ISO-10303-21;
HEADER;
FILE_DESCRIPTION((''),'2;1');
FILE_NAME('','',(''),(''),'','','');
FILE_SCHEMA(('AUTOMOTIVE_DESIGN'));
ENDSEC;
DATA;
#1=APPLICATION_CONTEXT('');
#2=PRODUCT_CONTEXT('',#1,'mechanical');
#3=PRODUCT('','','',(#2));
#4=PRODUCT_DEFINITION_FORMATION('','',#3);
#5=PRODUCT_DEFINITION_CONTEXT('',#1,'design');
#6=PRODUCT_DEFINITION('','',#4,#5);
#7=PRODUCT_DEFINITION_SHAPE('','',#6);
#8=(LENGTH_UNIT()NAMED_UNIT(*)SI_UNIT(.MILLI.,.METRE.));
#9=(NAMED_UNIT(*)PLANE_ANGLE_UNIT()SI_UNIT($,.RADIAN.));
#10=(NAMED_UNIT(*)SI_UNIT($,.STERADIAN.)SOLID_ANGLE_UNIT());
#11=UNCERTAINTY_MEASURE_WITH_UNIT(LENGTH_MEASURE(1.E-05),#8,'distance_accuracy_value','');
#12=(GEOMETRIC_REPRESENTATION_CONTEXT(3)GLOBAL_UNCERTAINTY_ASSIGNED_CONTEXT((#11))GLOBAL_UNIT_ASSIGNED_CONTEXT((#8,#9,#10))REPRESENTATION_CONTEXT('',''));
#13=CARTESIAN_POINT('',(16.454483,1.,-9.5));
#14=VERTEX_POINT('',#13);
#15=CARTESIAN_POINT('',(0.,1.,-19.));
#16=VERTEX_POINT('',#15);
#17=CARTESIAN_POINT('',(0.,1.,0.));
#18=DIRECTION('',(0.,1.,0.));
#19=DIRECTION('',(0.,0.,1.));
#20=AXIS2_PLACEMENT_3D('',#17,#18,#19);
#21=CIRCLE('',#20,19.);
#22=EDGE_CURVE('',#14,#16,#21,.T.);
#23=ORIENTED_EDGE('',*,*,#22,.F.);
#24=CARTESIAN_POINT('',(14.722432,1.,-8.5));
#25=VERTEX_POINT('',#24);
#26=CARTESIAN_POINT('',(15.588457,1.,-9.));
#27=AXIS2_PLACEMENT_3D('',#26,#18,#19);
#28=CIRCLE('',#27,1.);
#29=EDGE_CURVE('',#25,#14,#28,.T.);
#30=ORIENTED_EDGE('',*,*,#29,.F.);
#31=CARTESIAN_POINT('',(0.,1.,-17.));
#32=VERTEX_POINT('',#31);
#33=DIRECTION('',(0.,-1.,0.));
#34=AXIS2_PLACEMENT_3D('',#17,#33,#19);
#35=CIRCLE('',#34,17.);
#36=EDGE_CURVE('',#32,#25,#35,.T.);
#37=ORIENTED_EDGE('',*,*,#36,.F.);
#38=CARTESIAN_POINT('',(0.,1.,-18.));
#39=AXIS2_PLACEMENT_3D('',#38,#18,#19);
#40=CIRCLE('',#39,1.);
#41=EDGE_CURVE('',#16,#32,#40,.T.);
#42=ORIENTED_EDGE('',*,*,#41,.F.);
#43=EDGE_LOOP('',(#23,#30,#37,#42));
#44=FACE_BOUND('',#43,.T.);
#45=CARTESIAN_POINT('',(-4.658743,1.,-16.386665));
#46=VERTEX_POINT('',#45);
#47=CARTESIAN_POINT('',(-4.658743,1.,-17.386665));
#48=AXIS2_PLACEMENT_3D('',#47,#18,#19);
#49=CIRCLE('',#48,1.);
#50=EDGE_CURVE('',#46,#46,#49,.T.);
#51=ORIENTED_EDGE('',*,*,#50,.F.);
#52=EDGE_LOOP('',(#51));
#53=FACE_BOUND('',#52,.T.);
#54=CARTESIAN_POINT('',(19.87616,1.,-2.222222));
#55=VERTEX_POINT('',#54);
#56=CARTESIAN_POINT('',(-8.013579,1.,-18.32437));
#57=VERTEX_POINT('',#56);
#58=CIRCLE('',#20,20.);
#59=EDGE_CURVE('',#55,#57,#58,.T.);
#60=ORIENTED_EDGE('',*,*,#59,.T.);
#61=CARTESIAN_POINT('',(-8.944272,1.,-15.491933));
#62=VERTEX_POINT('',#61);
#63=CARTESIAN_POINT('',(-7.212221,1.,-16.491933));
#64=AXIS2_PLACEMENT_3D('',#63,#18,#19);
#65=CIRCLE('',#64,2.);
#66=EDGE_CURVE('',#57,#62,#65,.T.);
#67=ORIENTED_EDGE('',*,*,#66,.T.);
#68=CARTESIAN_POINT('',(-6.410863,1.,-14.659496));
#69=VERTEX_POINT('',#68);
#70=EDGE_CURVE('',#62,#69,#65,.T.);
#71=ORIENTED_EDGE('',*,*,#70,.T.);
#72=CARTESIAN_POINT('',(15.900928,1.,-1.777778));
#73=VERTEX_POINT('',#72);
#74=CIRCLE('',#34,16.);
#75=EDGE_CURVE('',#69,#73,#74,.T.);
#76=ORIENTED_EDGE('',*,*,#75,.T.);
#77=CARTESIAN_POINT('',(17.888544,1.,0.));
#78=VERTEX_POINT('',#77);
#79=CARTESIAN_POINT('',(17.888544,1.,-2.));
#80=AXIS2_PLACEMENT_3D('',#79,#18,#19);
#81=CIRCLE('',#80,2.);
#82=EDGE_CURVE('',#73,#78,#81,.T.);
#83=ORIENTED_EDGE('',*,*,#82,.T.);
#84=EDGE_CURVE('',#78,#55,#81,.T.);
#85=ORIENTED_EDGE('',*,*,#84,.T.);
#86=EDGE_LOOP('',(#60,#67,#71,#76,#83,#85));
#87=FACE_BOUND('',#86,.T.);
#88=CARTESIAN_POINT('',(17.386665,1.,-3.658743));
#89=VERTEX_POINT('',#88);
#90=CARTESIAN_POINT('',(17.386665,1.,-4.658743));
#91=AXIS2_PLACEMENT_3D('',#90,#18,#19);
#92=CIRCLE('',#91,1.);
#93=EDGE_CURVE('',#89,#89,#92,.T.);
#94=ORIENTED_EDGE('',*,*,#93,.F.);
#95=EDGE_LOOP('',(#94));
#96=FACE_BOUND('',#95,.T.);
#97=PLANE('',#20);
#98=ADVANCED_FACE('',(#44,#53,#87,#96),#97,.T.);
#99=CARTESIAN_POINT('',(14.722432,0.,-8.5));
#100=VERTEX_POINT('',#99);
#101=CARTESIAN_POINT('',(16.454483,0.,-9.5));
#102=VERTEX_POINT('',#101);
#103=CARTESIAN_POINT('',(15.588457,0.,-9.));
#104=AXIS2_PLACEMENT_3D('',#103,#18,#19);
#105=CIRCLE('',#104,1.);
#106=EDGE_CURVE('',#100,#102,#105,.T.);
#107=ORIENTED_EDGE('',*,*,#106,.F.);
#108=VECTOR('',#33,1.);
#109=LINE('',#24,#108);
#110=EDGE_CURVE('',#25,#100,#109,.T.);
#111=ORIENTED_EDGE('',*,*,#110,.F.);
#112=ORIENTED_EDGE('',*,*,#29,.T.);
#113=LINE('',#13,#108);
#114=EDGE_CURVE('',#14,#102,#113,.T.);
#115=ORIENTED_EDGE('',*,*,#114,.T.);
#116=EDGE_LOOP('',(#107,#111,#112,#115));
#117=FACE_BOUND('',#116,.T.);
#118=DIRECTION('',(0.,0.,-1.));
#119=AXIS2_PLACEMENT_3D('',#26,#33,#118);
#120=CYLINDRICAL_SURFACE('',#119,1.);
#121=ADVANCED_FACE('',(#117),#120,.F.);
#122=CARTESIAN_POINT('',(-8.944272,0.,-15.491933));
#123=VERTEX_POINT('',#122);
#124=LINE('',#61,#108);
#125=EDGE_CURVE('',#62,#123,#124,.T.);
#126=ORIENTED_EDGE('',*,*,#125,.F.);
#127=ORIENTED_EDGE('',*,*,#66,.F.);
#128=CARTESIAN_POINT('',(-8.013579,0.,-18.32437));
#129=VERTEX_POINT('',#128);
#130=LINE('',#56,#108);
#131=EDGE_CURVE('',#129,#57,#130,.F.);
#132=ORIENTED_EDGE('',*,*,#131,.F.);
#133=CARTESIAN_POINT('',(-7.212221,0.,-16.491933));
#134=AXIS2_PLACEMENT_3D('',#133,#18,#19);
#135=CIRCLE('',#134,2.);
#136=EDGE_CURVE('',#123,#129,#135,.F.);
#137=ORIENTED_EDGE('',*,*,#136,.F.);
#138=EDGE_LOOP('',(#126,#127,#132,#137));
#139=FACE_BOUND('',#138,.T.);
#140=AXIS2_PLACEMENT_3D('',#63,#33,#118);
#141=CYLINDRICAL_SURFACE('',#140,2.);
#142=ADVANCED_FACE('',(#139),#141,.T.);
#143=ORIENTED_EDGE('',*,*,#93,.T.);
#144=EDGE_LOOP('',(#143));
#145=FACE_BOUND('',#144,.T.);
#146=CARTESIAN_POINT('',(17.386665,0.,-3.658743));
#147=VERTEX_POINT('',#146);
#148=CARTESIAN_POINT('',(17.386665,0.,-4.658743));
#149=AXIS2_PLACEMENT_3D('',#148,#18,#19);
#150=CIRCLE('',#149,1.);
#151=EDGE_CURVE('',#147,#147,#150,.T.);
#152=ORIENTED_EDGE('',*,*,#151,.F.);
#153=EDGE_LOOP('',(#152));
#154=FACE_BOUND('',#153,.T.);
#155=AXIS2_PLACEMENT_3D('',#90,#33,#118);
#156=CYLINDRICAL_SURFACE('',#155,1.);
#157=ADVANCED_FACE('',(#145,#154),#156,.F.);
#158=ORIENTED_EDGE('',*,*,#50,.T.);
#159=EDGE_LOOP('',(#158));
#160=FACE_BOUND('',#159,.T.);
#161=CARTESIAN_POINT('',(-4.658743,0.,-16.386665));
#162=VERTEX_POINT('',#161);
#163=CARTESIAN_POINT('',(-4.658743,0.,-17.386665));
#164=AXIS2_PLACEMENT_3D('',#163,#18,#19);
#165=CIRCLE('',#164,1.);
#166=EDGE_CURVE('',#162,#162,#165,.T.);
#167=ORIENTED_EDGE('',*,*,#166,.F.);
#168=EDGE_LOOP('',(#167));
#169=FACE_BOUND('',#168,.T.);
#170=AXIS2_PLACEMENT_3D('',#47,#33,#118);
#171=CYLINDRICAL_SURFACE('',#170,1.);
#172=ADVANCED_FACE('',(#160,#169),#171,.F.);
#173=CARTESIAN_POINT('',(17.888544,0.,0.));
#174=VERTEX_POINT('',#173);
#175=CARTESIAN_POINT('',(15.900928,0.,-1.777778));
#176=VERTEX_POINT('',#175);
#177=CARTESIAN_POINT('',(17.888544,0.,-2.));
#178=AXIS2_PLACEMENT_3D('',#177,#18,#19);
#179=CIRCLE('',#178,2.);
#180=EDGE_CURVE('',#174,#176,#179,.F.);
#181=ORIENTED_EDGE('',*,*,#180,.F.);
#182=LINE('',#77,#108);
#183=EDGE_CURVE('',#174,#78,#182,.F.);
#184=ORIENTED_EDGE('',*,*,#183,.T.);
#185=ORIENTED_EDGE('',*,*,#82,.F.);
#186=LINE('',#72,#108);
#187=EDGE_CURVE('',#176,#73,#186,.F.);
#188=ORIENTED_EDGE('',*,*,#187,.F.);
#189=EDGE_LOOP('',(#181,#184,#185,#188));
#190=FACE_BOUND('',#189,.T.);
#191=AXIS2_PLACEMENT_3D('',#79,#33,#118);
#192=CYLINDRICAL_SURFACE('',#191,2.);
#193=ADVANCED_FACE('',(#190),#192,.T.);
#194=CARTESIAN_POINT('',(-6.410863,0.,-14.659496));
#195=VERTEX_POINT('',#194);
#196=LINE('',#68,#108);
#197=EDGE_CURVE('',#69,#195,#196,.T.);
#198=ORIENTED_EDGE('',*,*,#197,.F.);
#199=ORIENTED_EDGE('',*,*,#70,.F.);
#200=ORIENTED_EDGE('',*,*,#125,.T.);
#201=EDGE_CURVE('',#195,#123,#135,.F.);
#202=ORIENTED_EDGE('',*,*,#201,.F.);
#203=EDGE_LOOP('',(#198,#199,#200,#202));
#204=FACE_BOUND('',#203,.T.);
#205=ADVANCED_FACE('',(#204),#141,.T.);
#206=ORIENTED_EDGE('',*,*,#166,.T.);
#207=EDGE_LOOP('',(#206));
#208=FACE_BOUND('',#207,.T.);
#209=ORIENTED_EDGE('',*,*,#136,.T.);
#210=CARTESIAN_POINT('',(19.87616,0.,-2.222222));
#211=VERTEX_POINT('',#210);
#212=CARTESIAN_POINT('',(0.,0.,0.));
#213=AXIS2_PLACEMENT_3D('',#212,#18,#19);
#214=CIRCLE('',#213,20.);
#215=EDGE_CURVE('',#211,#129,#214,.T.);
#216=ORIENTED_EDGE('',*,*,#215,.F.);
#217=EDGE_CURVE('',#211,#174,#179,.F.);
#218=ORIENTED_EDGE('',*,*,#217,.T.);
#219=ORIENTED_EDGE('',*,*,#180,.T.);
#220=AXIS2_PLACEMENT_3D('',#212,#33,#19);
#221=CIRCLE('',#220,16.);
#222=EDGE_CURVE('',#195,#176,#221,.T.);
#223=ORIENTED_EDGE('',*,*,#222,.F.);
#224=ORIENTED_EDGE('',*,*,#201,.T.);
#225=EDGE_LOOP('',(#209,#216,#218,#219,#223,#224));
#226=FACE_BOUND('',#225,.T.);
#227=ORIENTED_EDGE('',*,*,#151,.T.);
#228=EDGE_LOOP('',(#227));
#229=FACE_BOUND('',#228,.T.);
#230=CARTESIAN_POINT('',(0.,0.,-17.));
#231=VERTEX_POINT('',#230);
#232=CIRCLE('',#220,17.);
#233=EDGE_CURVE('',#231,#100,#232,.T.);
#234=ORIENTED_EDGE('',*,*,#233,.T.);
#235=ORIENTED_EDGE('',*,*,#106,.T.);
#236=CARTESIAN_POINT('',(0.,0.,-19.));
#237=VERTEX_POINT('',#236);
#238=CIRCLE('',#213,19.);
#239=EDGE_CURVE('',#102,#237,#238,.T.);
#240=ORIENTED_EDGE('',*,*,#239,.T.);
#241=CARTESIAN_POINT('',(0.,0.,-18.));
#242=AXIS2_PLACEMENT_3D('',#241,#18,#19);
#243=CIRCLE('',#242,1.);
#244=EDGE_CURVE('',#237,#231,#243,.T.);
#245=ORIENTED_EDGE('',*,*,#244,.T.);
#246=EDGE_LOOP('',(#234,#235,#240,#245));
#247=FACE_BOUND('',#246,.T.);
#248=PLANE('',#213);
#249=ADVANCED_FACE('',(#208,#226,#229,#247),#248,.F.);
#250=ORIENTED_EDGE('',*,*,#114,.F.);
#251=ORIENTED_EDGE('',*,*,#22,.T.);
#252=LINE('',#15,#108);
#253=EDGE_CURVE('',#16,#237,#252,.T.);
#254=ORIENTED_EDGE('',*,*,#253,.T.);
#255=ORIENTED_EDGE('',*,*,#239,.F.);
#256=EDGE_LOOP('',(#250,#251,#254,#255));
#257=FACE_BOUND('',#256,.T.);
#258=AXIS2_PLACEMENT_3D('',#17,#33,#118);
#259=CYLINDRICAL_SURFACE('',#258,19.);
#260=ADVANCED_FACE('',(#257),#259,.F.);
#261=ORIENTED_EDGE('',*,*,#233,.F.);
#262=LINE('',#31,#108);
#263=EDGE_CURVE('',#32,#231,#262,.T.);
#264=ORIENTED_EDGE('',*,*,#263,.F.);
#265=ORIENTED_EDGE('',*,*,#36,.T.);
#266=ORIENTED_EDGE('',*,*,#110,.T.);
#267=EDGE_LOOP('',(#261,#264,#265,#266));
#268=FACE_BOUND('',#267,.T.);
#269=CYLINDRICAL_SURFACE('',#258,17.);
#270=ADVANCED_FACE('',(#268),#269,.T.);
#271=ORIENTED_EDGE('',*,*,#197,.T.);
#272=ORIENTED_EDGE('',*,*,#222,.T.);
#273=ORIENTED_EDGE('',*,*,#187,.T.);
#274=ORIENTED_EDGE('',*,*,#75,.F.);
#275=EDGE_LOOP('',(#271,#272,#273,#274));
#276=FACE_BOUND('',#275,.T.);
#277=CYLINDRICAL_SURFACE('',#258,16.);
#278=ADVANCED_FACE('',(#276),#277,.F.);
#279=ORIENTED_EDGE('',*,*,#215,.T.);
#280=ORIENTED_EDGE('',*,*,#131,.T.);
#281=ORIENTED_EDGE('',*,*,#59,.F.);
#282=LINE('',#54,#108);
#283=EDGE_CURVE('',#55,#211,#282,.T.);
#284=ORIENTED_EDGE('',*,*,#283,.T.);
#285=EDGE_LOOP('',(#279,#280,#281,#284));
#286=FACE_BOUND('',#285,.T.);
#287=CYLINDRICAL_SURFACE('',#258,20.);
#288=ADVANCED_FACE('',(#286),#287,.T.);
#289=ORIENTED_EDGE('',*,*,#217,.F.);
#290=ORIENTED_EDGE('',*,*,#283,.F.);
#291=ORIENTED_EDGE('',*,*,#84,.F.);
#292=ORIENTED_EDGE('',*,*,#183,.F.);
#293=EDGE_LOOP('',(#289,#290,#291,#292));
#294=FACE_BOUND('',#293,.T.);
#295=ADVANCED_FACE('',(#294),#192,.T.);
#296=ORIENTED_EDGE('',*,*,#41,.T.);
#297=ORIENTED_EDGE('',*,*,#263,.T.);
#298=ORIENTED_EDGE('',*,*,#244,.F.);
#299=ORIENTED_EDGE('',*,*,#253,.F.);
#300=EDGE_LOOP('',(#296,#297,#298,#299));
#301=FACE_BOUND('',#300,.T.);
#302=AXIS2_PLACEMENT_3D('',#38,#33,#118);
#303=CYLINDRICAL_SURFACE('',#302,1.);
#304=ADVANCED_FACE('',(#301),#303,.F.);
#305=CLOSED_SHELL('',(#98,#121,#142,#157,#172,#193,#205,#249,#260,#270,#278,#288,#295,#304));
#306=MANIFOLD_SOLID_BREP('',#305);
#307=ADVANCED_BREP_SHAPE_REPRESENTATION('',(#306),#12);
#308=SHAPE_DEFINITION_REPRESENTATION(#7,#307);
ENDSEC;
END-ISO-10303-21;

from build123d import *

# Parameters (mm, degrees)
SKETCH_1_R      = 1
EXTRUDE_1_DEPTH = 1
FILLET_1_R      = 2


with BuildPart() as part:
    # 草图1 → 凸台-拉伸1 (new body)
    with BuildSketch(Plane(origin=(0, 0, 0), x_dir=(1, 0, 0), z_dir=(0, 1, 0))):
        with BuildLine():
            Line((20, 0), (16, 0))
            ThreePointArc((16, 0), (8, 13.856406461), (-8, 13.856406461))
            Line((-8, 13.856406461), (-10, 17.320508076))
            ThreePointArc((-10, 17.320508076), (10, 17.320508076), (20, 0))
        make_face()
        with Locations(Location((-4.658742812, 17.386664873, 0), (0, 0, 270))):
            Circle(SKETCH_1_R, mode=Mode.SUBTRACT)
        with Locations(Location((17.386664873, 4.658742812, 0), (0, 0, 270))):
            Circle(SKETCH_1_R, mode=Mode.SUBTRACT)
        with BuildLine():
            ThreePointArc((16.454482672, 9.5), (9.5, 16.454482672), (0, 19))
            ThreePointArc((0, 19), (-1, 18), (0, 17))
            ThreePointArc((0, 17), (8.5, 14.722431864), (14.722431864, 8.5))
            ThreePointArc((14.722431864, 8.5), (16.088457268, 8.133974596), (16.454482672, 9.5))
        make_face(mode=Mode.SUBTRACT)
    extrude(amount=EXTRUDE_1_DEPTH)

    # 圆角1
    fillet_1_edges = [part.edges().sort_by_distance(p)[0] for p in [
        (-8, 0.5, -13.856406461),
        (-10, 0.5, -17.320508076),
        (16, 0.5, 0),
        (20, 0.5, 0),
    ]]
    fillet(fillet_1_edges, radius=FILLET_1_R - 0.0001)  # a hair under: the kernel refuses the full size


solid = part.part
